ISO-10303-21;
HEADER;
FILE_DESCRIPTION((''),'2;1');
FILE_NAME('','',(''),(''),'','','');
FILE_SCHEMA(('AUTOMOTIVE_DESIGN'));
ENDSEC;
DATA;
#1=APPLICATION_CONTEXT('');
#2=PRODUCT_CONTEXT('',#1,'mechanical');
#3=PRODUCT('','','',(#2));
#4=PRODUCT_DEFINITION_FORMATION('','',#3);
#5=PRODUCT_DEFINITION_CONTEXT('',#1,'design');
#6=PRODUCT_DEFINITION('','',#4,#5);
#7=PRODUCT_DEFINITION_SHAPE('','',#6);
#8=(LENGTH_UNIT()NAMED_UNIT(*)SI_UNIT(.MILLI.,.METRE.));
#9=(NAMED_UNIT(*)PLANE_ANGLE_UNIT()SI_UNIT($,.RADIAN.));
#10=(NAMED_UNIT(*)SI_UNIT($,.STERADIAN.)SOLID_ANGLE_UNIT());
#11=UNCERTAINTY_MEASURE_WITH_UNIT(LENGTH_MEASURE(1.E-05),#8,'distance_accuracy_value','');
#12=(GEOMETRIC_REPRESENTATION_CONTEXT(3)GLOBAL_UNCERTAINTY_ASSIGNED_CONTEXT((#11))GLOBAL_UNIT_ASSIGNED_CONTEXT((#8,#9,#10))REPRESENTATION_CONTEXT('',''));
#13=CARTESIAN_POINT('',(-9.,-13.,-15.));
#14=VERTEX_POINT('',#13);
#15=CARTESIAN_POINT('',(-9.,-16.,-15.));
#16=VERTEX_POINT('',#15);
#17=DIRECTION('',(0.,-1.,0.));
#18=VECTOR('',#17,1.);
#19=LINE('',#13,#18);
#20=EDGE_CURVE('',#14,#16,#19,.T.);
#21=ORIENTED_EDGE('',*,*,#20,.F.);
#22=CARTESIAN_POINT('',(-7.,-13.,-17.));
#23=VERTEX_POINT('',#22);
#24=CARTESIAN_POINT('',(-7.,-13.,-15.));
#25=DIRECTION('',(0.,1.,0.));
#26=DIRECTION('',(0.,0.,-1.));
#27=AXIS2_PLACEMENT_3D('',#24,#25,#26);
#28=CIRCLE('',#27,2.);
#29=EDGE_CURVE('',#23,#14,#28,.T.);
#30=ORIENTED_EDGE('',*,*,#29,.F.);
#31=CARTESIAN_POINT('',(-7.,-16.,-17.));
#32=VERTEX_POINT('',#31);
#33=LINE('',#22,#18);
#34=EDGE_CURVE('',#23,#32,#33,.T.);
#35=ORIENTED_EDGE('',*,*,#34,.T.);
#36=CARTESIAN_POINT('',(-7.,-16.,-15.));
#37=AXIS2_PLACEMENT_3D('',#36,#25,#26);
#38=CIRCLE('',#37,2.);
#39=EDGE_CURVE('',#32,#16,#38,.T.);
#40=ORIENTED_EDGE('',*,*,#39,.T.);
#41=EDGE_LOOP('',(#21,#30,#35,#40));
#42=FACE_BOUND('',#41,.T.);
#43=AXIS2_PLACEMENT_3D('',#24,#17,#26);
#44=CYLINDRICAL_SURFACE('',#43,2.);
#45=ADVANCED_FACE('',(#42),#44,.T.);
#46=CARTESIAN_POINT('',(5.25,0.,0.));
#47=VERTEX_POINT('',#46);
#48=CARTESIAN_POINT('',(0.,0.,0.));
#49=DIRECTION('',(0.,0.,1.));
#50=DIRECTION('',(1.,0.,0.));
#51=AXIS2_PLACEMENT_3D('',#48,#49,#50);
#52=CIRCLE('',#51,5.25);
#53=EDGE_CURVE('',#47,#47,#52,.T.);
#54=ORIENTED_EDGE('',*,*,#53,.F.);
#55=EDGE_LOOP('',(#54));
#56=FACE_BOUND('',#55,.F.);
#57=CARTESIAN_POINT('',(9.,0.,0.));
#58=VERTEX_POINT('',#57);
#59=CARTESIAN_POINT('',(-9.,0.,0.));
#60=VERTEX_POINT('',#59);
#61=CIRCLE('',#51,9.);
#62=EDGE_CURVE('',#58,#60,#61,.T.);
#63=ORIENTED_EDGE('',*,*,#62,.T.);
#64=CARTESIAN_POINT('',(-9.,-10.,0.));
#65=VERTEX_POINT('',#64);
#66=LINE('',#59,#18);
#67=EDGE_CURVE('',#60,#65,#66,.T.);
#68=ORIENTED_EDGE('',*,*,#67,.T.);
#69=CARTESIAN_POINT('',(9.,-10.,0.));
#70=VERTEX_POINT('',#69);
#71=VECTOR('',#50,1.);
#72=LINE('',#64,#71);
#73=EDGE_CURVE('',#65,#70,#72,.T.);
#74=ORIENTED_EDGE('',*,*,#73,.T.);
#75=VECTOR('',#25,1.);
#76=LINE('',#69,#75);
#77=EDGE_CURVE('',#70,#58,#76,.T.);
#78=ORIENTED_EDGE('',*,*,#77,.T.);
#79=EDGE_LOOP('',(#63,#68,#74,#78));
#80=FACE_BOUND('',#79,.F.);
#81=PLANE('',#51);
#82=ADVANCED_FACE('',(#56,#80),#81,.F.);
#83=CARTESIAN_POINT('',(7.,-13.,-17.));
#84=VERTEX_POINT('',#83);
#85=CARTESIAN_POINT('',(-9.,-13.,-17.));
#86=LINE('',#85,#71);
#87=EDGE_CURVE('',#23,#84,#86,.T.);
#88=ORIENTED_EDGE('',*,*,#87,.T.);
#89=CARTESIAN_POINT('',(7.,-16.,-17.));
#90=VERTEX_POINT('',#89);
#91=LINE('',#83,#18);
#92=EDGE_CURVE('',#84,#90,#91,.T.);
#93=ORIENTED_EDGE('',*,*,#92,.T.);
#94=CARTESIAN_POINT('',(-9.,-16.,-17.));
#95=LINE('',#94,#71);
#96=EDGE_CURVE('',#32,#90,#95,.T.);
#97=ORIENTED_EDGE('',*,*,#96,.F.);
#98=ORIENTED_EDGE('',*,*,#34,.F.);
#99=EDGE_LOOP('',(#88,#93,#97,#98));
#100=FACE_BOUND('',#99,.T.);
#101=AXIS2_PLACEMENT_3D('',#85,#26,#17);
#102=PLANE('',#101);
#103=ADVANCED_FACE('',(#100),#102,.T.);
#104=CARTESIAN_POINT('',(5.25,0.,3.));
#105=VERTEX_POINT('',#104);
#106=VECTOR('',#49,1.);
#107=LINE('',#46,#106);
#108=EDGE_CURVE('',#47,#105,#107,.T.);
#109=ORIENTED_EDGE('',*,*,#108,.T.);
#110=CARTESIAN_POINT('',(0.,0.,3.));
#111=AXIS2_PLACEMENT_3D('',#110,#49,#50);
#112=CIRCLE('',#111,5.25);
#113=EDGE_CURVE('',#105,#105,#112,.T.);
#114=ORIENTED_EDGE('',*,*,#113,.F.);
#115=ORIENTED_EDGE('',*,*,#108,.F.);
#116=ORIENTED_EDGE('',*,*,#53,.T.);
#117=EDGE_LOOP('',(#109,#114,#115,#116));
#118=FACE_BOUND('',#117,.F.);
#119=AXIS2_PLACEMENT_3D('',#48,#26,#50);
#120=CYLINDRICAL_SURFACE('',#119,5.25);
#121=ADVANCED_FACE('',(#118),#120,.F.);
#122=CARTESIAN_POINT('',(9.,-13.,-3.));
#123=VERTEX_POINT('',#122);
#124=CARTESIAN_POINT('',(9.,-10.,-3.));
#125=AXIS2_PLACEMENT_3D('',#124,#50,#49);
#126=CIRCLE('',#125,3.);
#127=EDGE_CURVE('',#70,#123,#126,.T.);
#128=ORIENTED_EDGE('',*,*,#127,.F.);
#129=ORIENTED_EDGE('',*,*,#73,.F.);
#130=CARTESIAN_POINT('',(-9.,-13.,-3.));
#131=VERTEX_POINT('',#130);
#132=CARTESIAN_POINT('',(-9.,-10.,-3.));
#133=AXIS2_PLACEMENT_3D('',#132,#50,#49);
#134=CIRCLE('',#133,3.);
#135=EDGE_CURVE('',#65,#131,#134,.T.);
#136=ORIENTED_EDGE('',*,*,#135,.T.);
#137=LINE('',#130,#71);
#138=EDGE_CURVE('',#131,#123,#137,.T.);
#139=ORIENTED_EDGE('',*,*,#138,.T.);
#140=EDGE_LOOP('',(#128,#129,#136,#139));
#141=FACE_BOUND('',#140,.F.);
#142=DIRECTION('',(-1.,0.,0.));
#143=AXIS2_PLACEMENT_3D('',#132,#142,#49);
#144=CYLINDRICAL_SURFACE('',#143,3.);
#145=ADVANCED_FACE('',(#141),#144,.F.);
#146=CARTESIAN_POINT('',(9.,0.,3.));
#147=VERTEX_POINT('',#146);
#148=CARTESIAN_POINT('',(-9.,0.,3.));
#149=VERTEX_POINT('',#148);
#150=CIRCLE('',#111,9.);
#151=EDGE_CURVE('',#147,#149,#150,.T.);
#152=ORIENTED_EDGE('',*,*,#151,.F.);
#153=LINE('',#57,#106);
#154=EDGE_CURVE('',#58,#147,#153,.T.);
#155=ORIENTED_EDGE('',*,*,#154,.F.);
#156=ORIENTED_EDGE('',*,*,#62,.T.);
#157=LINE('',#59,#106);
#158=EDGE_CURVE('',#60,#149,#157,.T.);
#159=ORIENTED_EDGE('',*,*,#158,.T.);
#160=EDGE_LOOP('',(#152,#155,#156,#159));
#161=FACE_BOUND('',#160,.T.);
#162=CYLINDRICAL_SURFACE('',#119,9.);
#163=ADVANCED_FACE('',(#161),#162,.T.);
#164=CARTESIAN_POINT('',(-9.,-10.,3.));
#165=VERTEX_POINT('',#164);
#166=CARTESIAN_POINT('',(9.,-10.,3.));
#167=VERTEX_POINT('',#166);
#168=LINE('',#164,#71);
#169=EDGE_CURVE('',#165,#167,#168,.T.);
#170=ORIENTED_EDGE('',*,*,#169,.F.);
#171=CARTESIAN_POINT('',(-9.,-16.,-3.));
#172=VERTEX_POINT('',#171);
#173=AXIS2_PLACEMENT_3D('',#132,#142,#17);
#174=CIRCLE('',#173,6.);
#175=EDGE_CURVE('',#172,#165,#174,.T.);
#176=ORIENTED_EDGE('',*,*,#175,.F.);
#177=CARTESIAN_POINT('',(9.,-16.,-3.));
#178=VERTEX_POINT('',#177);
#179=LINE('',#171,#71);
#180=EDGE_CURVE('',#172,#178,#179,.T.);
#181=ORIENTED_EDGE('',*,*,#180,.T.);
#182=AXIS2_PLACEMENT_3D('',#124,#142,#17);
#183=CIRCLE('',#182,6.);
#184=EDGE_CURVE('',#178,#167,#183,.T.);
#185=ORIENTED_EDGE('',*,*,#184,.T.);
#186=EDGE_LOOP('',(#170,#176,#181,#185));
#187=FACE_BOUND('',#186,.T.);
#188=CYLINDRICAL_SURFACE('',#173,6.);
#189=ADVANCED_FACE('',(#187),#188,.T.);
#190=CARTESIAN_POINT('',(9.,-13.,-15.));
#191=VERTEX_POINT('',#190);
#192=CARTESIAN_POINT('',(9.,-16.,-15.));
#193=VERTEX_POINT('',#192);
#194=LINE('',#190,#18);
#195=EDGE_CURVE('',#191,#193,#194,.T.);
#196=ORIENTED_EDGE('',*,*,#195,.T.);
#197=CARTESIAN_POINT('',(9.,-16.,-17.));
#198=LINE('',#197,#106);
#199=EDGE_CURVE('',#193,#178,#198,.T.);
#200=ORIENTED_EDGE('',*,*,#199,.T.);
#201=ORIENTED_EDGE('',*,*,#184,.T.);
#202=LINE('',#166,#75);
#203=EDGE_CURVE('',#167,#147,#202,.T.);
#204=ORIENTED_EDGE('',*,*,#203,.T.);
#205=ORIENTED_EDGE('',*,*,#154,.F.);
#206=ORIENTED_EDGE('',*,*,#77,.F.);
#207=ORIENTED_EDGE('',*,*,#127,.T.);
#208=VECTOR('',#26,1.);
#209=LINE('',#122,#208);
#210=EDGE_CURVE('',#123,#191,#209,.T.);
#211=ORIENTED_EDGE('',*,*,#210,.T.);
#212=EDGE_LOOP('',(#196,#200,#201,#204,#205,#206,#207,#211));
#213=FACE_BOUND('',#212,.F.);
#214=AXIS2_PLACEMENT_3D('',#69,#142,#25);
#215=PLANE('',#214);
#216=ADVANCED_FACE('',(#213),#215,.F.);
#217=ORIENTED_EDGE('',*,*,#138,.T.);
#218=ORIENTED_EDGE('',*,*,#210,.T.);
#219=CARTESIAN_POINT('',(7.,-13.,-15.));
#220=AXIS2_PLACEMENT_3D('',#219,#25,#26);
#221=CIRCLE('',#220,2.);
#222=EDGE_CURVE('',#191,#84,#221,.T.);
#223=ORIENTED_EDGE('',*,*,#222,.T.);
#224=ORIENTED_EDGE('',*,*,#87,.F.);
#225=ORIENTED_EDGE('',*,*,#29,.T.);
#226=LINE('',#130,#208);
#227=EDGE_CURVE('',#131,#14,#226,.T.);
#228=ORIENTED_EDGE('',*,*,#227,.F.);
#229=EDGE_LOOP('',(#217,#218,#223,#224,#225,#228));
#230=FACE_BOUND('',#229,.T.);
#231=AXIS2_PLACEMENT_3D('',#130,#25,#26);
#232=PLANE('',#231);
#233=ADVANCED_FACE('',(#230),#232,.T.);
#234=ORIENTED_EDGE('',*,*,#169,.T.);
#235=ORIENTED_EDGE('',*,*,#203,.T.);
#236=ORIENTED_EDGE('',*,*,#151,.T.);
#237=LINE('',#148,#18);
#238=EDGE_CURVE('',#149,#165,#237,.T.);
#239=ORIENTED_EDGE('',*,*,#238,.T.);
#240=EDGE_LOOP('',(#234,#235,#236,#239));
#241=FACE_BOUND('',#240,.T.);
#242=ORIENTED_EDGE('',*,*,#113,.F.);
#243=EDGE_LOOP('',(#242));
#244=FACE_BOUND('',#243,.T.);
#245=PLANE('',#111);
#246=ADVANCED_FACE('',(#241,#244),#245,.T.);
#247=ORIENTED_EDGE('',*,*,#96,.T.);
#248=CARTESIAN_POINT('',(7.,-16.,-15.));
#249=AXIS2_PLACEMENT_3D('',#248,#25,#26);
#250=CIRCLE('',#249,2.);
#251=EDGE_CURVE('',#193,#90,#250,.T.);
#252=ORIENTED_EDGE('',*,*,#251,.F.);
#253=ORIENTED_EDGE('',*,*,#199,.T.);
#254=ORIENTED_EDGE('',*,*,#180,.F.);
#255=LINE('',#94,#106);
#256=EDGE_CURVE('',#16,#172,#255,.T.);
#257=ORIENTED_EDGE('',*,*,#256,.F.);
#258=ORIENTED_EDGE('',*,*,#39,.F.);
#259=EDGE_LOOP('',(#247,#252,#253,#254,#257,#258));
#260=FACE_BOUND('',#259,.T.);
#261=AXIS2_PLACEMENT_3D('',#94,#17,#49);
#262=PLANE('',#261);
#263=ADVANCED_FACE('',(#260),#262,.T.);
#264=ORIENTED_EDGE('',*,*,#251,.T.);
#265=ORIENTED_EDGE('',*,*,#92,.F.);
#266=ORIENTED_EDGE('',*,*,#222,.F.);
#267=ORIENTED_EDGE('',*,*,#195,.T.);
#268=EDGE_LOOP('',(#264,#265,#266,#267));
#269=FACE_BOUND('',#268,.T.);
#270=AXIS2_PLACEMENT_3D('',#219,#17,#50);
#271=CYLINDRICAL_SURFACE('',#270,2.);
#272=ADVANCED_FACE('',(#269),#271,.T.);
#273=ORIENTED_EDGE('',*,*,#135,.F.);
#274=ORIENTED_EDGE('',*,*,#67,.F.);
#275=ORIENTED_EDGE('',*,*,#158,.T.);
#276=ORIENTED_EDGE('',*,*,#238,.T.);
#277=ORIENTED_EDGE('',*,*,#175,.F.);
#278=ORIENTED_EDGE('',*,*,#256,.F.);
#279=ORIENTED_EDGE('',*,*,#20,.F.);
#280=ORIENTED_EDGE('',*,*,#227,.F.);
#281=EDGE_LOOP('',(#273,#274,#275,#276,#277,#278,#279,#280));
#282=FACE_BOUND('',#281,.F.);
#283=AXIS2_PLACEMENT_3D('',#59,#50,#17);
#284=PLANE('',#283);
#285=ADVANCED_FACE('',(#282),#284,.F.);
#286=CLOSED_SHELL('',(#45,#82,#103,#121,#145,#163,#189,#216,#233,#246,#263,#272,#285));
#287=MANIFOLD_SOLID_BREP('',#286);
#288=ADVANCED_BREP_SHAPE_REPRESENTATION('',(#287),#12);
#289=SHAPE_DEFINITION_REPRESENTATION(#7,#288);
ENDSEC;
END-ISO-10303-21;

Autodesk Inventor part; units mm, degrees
ref_plane "YZ Plane" through (0, 0, 0) normal (1, 0, 0) x (0, 1, 0)
ref_plane "XZ Plane" through (0, 0, 0) normal (0, 1, 0) x (-1, 0, 0)
ref_plane "XY Plane" through (0, 0, 0) normal (0, 0, 1) x (1, 0, 0)
sketch "Schizzo1" plane through (0, 0, 0) normal (0, 0, 1) x (1, 0, 0)
  circle A0 centre (0, 0) radius 5.25
  arc A1 (9, 0) -> (-9, 0) centre (0, 0) ccw
  line L0 (-9, 0) -> (-9, -10)
  line L1 (-9, -10) -> (9, -10)
  line L2 (9, -10) -> (9, 0)
  dimension "d0" = 10.5
  dimension "d1" = 18
  dimension "d2" = 10
extrude "Piano1" add sketch "Schizzo1" along normal blind 3
sketch "Schizzo2" plane through (-9, -13, -3) normal (0, -1, 0) x (1, 0, 0)
  line L0 (18, 0) -> (0, 0)
  line L1 (0, 0) -> (0, -14)
  line L2 (0, -14) -> (18, -14)
  line L3 (18, -14) -> (18, 0)
edge flange "Flangia1" height 20 angle 90 thickness 3 bend radius 3 thickness toward (0, -1, 0) relief tear relief width 3 relief depth 1.5 edges at (0, -10, 0) wall of the first edge with corners at (9, -13, -3) (-9, -13, -3) (-9, -13, -17) (9, -13, -17)
bend "Piega (Bend)1"
corner "Angolo1"
fillet "Arrotondamento angolo1" radius 2 2 edges at (9, -14.5, -17) (-9, -14.5, -17)
equation "\"d3\" = Spessore"
equation "\"d4\" = LarghezzaScaricoPiega"
equation "\"d5\" = ProfonditàScaricoPiega"
equation "\"d6\" = ResiduoMinimo"
equation "\"d7\" = RaggioTransizione"
equation "\"d10\" = RaggioPiega"
equation "\"d11\" = DimensioniScaricoAngolo"
equation "\"d12\" = DimensioneGioco"
equation "\"d13\" = Dimensione_raggio_Jacobi"
equation "\"RaggioPiega\" = Spessore"
equation "\"LarghezzaScaricoPiega\" = Spessore"
equation "\"ProfonditàScaricoPiega\" = 0.5 * Spessore"
equation "\"DimensioniScaricoAngolo\" = 4 * Spessore"
equation "\"ResiduoMinimo\" = 2 * Spessore"
equation "\"RaggioTransizione\" = RaggioPiega"
equation "\"Dimensione_raggio_Jacobi\" = RaggioPiega"
equation "\"DimensioneGioco\" = Spessore"
equation "\"Spessore\" = 3"
properties part number "Supporto perno tendi motore" material "Acciaio inossidabile"
